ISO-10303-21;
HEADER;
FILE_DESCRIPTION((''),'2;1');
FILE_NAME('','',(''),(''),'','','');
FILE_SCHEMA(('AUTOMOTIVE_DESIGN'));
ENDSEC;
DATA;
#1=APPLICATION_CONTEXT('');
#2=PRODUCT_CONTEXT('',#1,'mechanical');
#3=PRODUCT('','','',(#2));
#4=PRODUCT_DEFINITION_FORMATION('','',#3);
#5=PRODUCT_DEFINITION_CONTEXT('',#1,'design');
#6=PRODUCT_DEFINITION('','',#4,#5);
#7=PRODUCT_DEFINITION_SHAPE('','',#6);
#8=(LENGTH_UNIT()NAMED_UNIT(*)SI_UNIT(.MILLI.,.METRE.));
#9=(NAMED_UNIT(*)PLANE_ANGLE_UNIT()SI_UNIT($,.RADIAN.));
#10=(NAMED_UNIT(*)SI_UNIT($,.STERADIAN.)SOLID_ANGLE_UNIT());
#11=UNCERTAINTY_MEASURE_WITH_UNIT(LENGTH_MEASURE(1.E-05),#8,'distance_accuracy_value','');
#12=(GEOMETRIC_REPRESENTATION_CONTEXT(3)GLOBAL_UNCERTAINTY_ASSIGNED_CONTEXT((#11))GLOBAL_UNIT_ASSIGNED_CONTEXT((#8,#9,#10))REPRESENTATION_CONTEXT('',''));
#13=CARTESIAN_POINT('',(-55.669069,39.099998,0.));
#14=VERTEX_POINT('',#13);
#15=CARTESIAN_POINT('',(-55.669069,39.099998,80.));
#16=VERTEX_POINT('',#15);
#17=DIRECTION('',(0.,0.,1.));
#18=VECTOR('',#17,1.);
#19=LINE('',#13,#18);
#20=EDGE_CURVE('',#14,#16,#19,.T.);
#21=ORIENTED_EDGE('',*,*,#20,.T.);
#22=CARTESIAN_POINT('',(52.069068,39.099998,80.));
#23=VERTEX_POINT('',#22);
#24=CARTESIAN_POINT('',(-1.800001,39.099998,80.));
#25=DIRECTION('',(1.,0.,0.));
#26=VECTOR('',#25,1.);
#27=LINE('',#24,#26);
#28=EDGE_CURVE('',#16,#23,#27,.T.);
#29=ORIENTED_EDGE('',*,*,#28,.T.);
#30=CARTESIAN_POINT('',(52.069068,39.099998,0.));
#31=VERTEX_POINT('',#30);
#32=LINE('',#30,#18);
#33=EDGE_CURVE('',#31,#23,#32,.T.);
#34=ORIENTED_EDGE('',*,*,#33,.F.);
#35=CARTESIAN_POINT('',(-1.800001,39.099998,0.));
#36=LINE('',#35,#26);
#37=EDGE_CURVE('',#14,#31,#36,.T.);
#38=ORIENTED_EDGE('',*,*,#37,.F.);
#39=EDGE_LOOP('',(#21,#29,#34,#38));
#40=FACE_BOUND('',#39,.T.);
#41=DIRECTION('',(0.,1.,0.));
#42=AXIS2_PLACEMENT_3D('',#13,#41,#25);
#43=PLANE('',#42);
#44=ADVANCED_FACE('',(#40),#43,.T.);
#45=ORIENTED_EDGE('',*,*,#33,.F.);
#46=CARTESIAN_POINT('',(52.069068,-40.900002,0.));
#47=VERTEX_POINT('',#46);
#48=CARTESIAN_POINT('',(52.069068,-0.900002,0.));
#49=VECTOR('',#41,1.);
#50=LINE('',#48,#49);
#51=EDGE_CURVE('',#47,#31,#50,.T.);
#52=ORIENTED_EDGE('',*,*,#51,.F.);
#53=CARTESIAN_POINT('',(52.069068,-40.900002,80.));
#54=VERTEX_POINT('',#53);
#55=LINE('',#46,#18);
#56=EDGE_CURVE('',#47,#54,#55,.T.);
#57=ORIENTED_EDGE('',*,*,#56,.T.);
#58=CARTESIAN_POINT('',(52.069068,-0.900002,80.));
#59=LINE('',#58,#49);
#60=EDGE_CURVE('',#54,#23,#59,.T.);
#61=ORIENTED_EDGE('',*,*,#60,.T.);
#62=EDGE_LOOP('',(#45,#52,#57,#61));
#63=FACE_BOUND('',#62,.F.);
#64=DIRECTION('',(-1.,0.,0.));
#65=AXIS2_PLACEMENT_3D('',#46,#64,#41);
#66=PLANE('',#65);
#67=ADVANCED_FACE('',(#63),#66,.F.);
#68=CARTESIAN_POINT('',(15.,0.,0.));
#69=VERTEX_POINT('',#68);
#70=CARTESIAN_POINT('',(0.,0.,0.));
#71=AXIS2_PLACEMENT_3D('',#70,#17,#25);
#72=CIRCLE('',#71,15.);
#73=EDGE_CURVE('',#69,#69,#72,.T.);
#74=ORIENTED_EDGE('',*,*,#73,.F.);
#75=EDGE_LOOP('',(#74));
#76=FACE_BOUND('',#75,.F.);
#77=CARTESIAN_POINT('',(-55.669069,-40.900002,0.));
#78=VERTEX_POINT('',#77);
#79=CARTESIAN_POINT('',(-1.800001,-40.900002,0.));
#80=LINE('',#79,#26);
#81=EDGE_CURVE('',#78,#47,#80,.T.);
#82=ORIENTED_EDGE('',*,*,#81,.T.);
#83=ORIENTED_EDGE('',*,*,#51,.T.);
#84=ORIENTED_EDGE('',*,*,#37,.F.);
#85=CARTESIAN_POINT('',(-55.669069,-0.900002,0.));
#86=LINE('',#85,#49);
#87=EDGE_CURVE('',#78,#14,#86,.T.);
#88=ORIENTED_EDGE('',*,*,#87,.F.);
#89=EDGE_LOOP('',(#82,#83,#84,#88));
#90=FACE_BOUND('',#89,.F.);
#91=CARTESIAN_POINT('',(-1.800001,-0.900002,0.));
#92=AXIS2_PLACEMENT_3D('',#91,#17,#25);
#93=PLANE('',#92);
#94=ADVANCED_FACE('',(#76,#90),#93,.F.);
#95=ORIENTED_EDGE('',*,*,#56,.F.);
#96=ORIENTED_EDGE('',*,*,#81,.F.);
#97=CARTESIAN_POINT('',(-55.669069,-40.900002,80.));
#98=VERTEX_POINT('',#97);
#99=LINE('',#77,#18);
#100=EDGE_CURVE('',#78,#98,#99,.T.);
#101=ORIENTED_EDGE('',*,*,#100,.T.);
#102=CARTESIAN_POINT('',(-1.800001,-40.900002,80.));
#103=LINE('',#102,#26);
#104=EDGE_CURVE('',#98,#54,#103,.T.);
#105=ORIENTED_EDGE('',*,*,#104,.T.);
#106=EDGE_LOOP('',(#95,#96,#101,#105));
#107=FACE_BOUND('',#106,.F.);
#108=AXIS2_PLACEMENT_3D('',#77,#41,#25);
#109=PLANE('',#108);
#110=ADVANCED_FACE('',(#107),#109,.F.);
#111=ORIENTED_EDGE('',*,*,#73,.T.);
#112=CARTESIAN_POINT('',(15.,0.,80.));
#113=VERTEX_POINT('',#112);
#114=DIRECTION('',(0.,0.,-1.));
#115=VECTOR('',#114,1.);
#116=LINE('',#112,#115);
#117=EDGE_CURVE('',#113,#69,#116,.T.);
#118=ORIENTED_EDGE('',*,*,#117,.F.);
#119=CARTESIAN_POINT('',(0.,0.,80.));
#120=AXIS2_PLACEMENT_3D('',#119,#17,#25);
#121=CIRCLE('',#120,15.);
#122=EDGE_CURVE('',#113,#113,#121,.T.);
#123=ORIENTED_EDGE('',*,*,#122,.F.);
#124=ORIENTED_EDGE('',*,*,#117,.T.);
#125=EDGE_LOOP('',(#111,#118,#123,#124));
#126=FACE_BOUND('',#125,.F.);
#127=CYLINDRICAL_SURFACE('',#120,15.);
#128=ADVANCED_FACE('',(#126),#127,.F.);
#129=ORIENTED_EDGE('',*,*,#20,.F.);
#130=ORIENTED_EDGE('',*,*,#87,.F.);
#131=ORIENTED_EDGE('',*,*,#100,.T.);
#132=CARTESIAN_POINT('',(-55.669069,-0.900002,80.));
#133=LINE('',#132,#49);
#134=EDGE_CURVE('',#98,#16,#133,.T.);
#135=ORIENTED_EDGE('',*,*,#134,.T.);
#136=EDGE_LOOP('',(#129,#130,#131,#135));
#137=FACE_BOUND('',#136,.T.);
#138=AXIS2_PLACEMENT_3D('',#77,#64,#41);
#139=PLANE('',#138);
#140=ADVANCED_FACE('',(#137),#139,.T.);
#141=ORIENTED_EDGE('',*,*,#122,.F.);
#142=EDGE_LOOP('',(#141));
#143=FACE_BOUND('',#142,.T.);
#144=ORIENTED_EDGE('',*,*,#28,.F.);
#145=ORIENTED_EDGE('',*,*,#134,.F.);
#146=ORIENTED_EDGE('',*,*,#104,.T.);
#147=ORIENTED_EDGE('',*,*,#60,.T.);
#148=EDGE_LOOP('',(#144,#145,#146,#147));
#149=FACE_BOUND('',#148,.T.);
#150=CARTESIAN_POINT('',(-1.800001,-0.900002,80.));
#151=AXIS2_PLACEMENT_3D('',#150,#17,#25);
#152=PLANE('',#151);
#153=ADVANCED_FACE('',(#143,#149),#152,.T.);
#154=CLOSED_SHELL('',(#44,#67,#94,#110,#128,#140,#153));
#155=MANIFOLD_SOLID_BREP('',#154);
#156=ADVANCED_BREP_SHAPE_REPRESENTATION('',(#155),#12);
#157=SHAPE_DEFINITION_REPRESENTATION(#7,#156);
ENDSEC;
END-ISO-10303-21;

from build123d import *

# Parameters (mm, degrees)
F0_W     = 107.7381369554
F0_H     = 80
F1_DEPTH = 80
F2_R     = 15
F3_DEPTH = 80.001


# Not quite as in the source:
# - a feature names something its author has since deleted; it is built from what else it names


with BuildPart() as f1:
    # F0 (on Top) → F1 (new body)
    with BuildSketch(Plane.XY):
        with Locations((-1.8000006676, -0.9000021964)):
            Rectangle(F0_W, F0_H)
    extrude(amount=F1_DEPTH)

    # F2 (on face) → F3 (cut, through all)
    with BuildSketch(Plane.XY.offset(80)):
        Circle(F2_R)
    extrude(amount=-F3_DEPTH, mode=Mode.SUBTRACT)


solid = f1.part
